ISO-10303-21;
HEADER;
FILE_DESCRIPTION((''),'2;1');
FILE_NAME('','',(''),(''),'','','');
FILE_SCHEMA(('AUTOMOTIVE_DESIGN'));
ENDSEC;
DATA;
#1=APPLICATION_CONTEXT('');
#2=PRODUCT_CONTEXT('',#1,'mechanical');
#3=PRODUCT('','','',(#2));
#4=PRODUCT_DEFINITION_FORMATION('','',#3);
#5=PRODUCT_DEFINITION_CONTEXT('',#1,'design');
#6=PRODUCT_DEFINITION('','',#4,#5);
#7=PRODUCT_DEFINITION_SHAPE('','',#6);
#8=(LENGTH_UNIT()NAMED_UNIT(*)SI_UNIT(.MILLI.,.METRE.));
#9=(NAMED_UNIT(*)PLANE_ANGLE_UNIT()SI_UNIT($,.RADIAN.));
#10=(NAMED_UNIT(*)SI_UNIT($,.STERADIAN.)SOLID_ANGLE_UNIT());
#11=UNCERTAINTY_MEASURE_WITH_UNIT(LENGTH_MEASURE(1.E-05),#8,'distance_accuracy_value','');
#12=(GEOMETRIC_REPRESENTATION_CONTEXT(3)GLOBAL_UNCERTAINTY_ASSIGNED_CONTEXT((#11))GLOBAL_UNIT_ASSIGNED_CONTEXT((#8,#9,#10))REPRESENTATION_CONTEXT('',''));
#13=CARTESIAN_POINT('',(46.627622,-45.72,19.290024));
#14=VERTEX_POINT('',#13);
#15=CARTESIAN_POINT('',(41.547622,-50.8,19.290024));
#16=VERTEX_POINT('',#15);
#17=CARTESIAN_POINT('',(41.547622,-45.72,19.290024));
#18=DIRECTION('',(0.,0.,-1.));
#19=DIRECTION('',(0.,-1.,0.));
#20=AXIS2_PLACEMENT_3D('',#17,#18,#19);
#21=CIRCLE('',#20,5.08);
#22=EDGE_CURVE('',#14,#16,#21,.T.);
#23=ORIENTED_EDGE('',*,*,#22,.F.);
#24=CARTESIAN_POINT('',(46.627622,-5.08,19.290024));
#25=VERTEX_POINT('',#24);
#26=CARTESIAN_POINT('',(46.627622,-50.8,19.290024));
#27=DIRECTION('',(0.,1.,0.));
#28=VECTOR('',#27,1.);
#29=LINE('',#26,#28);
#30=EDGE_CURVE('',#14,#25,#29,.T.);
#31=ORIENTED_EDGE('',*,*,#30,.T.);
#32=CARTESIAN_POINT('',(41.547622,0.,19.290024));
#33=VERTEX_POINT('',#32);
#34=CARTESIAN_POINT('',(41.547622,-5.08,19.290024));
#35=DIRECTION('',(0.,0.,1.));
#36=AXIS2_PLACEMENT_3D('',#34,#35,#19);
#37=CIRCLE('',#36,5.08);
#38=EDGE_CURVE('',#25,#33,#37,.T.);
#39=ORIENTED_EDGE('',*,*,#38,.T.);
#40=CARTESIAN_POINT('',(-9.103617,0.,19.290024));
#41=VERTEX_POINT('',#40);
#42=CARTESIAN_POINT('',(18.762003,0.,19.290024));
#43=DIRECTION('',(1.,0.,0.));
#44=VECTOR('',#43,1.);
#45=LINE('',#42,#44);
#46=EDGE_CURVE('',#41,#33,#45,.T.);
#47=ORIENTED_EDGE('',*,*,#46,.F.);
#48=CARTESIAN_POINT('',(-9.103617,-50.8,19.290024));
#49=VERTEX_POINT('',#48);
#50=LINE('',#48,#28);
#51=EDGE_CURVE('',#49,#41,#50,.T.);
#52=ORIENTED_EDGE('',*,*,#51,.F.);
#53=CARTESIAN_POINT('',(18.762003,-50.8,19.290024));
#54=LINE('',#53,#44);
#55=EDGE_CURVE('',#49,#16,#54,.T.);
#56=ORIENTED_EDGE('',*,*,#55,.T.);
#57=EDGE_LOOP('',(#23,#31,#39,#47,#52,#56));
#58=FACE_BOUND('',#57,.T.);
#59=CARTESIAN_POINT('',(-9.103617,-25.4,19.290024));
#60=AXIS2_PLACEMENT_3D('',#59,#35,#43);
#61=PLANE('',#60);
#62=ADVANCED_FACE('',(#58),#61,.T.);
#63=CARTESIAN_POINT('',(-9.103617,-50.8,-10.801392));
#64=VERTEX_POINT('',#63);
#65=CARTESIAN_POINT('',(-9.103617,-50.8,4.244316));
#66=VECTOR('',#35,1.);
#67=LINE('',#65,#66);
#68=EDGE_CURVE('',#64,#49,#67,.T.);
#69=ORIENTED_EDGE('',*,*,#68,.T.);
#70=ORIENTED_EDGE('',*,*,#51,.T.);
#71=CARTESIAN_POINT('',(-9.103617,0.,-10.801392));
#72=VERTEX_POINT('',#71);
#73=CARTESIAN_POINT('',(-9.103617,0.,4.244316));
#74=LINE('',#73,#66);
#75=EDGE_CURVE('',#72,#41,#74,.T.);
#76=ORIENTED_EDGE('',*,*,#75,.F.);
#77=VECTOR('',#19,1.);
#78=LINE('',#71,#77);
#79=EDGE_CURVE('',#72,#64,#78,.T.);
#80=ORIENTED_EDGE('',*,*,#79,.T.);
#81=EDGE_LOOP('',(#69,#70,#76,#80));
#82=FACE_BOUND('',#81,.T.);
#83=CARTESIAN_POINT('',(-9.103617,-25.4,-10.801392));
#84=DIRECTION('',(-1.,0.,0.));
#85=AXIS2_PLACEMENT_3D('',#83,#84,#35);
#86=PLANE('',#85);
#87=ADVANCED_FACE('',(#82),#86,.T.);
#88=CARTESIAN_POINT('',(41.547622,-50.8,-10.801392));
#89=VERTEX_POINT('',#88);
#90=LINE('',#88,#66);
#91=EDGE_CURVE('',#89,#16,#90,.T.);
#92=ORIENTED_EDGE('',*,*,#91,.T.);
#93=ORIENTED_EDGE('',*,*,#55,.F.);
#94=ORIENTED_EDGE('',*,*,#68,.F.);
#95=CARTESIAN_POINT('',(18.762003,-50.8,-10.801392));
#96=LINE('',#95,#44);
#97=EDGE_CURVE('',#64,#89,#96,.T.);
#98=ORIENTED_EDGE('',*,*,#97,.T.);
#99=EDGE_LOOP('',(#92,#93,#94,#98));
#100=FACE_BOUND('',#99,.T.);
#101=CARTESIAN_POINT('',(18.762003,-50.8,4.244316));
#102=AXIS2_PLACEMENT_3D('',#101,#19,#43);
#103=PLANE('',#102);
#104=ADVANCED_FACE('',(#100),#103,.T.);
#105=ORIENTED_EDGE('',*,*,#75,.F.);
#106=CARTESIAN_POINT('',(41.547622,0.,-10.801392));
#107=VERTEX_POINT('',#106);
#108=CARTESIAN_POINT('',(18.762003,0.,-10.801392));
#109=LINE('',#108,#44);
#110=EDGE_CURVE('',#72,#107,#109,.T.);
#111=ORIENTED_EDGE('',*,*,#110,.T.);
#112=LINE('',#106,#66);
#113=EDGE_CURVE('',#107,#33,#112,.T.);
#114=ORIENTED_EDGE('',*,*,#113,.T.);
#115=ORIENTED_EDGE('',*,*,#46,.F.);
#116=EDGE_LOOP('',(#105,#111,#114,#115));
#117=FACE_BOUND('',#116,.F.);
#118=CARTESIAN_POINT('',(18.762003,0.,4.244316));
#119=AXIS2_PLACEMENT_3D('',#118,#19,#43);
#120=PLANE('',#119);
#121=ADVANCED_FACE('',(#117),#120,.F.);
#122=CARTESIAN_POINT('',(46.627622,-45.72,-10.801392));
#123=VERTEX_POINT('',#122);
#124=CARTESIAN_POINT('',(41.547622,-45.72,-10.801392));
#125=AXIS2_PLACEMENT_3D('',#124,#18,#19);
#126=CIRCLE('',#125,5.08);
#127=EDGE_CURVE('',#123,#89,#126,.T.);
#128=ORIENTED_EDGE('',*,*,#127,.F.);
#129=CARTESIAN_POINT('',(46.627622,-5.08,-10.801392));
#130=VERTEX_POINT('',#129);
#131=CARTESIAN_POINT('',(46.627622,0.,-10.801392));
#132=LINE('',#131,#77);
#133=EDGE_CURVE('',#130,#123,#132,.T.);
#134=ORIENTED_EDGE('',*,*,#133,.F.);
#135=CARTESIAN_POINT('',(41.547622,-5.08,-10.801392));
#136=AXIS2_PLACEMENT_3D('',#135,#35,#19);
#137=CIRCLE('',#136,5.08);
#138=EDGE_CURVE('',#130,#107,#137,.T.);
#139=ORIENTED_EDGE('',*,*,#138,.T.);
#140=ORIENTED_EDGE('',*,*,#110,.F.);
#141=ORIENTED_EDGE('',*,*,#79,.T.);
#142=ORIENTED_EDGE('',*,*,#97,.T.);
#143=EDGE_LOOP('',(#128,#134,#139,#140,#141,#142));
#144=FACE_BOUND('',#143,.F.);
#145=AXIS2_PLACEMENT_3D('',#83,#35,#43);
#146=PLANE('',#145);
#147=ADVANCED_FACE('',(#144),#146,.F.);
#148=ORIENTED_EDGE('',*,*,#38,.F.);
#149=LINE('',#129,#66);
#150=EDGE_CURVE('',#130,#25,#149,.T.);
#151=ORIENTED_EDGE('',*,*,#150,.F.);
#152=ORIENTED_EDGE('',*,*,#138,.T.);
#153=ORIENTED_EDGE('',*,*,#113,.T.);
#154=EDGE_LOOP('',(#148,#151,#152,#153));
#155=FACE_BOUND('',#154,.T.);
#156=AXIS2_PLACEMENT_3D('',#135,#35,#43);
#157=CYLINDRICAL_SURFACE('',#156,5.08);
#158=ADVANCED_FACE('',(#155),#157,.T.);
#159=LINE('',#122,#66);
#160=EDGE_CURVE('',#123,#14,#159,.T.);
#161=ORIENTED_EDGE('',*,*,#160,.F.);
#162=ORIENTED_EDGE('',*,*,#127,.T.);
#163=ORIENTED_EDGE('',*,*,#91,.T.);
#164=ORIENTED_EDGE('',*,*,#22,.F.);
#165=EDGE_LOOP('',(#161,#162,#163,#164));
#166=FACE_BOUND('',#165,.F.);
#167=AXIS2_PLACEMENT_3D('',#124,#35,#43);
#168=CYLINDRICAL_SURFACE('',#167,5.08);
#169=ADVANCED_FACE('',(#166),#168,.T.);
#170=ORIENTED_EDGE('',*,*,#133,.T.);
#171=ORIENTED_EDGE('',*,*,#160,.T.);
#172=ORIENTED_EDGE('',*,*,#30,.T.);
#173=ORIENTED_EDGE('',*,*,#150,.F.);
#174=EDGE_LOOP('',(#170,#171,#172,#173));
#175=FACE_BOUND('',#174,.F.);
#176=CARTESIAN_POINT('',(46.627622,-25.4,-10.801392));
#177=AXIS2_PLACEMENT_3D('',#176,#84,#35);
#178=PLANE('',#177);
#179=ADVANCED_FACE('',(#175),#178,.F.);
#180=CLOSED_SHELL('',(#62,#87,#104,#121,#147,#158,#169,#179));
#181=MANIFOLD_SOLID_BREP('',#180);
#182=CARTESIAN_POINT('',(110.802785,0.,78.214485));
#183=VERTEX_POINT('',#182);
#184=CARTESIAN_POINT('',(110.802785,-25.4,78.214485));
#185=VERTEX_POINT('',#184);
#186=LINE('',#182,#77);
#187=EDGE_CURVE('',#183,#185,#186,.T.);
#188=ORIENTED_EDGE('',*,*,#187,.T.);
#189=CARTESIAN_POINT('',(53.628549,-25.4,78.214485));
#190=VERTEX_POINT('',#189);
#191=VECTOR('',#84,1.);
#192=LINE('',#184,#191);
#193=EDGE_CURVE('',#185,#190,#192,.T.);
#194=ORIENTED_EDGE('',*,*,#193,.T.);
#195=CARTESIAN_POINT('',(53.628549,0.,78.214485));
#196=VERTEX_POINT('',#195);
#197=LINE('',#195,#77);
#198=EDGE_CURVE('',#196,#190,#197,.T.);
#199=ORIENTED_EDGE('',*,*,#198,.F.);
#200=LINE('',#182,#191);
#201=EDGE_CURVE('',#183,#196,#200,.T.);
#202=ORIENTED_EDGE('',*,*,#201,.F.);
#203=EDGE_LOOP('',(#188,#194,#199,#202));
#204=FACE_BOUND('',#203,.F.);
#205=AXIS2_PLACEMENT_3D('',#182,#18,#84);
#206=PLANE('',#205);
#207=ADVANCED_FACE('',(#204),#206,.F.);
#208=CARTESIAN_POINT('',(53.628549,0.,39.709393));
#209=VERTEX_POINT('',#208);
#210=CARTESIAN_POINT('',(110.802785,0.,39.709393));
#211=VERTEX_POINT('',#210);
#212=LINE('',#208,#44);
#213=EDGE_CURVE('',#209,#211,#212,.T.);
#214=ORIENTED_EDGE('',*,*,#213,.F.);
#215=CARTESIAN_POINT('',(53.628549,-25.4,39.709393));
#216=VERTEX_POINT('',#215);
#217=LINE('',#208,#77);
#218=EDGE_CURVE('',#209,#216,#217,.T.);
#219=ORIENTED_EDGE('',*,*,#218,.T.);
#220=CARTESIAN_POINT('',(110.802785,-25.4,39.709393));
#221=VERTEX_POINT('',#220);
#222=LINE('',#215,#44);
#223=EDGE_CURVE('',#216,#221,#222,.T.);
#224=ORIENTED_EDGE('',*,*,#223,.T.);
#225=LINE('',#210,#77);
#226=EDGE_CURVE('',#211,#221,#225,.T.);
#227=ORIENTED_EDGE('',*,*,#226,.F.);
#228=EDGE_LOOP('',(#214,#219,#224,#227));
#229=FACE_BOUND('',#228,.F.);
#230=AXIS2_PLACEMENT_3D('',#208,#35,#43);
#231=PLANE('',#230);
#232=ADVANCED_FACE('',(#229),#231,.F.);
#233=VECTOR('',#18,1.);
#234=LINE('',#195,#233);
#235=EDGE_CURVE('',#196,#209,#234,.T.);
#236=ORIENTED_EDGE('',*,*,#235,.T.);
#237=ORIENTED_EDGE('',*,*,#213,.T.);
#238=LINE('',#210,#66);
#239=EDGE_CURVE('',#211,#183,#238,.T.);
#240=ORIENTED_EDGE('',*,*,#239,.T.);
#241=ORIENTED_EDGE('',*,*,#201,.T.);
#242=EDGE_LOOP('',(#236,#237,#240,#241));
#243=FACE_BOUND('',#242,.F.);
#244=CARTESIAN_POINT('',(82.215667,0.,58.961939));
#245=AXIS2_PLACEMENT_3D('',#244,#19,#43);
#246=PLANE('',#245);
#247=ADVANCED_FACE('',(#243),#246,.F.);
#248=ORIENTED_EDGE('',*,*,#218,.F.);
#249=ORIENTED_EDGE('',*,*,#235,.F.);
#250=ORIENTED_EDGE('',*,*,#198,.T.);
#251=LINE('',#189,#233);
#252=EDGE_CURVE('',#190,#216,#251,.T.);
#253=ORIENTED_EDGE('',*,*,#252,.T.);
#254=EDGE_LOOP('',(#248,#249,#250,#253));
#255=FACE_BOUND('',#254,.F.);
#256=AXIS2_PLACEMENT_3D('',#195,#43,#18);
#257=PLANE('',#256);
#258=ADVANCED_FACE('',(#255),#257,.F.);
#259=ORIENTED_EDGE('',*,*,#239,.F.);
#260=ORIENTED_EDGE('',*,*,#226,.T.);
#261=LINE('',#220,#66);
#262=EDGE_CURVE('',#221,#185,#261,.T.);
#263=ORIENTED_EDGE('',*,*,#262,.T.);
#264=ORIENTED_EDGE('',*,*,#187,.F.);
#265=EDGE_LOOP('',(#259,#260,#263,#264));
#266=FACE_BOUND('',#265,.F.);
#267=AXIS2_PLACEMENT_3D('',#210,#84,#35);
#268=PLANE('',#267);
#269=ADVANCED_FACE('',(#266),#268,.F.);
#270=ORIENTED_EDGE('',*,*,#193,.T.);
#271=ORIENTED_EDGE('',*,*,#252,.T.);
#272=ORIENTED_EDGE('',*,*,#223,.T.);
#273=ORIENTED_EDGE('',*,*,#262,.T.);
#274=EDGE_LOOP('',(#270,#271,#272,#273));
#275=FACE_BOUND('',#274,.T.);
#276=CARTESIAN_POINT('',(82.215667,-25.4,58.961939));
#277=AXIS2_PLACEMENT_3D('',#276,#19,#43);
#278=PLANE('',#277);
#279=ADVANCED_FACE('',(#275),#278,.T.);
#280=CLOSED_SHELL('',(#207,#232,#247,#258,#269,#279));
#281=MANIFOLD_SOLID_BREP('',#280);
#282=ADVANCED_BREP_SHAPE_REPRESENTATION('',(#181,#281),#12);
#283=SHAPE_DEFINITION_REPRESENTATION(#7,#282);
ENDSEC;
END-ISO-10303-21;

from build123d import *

# Parameters (mm, degrees)
F0_W     = 55.7312387973
F0_H     = 30.0914160907
F1_DEPTH = 25.4
F2_DEPTH = 25.4
F3_R     = 5.08


with BuildPart() as f1:
    # F0 (on Front) → F1 (new body)
    with BuildSketch(Plane.XZ):
        with Locations((18.7620026991, 4.2443163693)):
            Rectangle(F0_W, F0_H)
    extrude(amount=F1_DEPTH)

    # F2 (add): a face of the model
    f2_faces = [f1.faces().sort_by_distance(p)[0] for p in [
        (18.7620026991, -25.4, 4.2443163693),
    ]]
    extrude(f2_faces, amount=F2_DEPTH)

    # F3
    f3_edges = [f1.edges().sort_by_distance(p)[0] for p in [
        (46.627622, -50.8, 4.244316),
        (46.627622, 0, 4.244316),
    ]]
    fillet(f3_edges, radius=F3_R)


with BuildPart() as f1b:
    # F0 (on Front) → F1, piece 2 (new body)
    with BuildSketch(Plane.XZ):
        Polygon((53.6285489798, 78.2144851983), (53.6285489798, 54.7660994999), (53.6285489798, 39.709392935), (110.8027845621, 39.709392935), (110.8027845621, 78.2144851983), align=None)
    extrude(amount=F1_DEPTH)


solid = Compound([f1.part, f1b.part])
